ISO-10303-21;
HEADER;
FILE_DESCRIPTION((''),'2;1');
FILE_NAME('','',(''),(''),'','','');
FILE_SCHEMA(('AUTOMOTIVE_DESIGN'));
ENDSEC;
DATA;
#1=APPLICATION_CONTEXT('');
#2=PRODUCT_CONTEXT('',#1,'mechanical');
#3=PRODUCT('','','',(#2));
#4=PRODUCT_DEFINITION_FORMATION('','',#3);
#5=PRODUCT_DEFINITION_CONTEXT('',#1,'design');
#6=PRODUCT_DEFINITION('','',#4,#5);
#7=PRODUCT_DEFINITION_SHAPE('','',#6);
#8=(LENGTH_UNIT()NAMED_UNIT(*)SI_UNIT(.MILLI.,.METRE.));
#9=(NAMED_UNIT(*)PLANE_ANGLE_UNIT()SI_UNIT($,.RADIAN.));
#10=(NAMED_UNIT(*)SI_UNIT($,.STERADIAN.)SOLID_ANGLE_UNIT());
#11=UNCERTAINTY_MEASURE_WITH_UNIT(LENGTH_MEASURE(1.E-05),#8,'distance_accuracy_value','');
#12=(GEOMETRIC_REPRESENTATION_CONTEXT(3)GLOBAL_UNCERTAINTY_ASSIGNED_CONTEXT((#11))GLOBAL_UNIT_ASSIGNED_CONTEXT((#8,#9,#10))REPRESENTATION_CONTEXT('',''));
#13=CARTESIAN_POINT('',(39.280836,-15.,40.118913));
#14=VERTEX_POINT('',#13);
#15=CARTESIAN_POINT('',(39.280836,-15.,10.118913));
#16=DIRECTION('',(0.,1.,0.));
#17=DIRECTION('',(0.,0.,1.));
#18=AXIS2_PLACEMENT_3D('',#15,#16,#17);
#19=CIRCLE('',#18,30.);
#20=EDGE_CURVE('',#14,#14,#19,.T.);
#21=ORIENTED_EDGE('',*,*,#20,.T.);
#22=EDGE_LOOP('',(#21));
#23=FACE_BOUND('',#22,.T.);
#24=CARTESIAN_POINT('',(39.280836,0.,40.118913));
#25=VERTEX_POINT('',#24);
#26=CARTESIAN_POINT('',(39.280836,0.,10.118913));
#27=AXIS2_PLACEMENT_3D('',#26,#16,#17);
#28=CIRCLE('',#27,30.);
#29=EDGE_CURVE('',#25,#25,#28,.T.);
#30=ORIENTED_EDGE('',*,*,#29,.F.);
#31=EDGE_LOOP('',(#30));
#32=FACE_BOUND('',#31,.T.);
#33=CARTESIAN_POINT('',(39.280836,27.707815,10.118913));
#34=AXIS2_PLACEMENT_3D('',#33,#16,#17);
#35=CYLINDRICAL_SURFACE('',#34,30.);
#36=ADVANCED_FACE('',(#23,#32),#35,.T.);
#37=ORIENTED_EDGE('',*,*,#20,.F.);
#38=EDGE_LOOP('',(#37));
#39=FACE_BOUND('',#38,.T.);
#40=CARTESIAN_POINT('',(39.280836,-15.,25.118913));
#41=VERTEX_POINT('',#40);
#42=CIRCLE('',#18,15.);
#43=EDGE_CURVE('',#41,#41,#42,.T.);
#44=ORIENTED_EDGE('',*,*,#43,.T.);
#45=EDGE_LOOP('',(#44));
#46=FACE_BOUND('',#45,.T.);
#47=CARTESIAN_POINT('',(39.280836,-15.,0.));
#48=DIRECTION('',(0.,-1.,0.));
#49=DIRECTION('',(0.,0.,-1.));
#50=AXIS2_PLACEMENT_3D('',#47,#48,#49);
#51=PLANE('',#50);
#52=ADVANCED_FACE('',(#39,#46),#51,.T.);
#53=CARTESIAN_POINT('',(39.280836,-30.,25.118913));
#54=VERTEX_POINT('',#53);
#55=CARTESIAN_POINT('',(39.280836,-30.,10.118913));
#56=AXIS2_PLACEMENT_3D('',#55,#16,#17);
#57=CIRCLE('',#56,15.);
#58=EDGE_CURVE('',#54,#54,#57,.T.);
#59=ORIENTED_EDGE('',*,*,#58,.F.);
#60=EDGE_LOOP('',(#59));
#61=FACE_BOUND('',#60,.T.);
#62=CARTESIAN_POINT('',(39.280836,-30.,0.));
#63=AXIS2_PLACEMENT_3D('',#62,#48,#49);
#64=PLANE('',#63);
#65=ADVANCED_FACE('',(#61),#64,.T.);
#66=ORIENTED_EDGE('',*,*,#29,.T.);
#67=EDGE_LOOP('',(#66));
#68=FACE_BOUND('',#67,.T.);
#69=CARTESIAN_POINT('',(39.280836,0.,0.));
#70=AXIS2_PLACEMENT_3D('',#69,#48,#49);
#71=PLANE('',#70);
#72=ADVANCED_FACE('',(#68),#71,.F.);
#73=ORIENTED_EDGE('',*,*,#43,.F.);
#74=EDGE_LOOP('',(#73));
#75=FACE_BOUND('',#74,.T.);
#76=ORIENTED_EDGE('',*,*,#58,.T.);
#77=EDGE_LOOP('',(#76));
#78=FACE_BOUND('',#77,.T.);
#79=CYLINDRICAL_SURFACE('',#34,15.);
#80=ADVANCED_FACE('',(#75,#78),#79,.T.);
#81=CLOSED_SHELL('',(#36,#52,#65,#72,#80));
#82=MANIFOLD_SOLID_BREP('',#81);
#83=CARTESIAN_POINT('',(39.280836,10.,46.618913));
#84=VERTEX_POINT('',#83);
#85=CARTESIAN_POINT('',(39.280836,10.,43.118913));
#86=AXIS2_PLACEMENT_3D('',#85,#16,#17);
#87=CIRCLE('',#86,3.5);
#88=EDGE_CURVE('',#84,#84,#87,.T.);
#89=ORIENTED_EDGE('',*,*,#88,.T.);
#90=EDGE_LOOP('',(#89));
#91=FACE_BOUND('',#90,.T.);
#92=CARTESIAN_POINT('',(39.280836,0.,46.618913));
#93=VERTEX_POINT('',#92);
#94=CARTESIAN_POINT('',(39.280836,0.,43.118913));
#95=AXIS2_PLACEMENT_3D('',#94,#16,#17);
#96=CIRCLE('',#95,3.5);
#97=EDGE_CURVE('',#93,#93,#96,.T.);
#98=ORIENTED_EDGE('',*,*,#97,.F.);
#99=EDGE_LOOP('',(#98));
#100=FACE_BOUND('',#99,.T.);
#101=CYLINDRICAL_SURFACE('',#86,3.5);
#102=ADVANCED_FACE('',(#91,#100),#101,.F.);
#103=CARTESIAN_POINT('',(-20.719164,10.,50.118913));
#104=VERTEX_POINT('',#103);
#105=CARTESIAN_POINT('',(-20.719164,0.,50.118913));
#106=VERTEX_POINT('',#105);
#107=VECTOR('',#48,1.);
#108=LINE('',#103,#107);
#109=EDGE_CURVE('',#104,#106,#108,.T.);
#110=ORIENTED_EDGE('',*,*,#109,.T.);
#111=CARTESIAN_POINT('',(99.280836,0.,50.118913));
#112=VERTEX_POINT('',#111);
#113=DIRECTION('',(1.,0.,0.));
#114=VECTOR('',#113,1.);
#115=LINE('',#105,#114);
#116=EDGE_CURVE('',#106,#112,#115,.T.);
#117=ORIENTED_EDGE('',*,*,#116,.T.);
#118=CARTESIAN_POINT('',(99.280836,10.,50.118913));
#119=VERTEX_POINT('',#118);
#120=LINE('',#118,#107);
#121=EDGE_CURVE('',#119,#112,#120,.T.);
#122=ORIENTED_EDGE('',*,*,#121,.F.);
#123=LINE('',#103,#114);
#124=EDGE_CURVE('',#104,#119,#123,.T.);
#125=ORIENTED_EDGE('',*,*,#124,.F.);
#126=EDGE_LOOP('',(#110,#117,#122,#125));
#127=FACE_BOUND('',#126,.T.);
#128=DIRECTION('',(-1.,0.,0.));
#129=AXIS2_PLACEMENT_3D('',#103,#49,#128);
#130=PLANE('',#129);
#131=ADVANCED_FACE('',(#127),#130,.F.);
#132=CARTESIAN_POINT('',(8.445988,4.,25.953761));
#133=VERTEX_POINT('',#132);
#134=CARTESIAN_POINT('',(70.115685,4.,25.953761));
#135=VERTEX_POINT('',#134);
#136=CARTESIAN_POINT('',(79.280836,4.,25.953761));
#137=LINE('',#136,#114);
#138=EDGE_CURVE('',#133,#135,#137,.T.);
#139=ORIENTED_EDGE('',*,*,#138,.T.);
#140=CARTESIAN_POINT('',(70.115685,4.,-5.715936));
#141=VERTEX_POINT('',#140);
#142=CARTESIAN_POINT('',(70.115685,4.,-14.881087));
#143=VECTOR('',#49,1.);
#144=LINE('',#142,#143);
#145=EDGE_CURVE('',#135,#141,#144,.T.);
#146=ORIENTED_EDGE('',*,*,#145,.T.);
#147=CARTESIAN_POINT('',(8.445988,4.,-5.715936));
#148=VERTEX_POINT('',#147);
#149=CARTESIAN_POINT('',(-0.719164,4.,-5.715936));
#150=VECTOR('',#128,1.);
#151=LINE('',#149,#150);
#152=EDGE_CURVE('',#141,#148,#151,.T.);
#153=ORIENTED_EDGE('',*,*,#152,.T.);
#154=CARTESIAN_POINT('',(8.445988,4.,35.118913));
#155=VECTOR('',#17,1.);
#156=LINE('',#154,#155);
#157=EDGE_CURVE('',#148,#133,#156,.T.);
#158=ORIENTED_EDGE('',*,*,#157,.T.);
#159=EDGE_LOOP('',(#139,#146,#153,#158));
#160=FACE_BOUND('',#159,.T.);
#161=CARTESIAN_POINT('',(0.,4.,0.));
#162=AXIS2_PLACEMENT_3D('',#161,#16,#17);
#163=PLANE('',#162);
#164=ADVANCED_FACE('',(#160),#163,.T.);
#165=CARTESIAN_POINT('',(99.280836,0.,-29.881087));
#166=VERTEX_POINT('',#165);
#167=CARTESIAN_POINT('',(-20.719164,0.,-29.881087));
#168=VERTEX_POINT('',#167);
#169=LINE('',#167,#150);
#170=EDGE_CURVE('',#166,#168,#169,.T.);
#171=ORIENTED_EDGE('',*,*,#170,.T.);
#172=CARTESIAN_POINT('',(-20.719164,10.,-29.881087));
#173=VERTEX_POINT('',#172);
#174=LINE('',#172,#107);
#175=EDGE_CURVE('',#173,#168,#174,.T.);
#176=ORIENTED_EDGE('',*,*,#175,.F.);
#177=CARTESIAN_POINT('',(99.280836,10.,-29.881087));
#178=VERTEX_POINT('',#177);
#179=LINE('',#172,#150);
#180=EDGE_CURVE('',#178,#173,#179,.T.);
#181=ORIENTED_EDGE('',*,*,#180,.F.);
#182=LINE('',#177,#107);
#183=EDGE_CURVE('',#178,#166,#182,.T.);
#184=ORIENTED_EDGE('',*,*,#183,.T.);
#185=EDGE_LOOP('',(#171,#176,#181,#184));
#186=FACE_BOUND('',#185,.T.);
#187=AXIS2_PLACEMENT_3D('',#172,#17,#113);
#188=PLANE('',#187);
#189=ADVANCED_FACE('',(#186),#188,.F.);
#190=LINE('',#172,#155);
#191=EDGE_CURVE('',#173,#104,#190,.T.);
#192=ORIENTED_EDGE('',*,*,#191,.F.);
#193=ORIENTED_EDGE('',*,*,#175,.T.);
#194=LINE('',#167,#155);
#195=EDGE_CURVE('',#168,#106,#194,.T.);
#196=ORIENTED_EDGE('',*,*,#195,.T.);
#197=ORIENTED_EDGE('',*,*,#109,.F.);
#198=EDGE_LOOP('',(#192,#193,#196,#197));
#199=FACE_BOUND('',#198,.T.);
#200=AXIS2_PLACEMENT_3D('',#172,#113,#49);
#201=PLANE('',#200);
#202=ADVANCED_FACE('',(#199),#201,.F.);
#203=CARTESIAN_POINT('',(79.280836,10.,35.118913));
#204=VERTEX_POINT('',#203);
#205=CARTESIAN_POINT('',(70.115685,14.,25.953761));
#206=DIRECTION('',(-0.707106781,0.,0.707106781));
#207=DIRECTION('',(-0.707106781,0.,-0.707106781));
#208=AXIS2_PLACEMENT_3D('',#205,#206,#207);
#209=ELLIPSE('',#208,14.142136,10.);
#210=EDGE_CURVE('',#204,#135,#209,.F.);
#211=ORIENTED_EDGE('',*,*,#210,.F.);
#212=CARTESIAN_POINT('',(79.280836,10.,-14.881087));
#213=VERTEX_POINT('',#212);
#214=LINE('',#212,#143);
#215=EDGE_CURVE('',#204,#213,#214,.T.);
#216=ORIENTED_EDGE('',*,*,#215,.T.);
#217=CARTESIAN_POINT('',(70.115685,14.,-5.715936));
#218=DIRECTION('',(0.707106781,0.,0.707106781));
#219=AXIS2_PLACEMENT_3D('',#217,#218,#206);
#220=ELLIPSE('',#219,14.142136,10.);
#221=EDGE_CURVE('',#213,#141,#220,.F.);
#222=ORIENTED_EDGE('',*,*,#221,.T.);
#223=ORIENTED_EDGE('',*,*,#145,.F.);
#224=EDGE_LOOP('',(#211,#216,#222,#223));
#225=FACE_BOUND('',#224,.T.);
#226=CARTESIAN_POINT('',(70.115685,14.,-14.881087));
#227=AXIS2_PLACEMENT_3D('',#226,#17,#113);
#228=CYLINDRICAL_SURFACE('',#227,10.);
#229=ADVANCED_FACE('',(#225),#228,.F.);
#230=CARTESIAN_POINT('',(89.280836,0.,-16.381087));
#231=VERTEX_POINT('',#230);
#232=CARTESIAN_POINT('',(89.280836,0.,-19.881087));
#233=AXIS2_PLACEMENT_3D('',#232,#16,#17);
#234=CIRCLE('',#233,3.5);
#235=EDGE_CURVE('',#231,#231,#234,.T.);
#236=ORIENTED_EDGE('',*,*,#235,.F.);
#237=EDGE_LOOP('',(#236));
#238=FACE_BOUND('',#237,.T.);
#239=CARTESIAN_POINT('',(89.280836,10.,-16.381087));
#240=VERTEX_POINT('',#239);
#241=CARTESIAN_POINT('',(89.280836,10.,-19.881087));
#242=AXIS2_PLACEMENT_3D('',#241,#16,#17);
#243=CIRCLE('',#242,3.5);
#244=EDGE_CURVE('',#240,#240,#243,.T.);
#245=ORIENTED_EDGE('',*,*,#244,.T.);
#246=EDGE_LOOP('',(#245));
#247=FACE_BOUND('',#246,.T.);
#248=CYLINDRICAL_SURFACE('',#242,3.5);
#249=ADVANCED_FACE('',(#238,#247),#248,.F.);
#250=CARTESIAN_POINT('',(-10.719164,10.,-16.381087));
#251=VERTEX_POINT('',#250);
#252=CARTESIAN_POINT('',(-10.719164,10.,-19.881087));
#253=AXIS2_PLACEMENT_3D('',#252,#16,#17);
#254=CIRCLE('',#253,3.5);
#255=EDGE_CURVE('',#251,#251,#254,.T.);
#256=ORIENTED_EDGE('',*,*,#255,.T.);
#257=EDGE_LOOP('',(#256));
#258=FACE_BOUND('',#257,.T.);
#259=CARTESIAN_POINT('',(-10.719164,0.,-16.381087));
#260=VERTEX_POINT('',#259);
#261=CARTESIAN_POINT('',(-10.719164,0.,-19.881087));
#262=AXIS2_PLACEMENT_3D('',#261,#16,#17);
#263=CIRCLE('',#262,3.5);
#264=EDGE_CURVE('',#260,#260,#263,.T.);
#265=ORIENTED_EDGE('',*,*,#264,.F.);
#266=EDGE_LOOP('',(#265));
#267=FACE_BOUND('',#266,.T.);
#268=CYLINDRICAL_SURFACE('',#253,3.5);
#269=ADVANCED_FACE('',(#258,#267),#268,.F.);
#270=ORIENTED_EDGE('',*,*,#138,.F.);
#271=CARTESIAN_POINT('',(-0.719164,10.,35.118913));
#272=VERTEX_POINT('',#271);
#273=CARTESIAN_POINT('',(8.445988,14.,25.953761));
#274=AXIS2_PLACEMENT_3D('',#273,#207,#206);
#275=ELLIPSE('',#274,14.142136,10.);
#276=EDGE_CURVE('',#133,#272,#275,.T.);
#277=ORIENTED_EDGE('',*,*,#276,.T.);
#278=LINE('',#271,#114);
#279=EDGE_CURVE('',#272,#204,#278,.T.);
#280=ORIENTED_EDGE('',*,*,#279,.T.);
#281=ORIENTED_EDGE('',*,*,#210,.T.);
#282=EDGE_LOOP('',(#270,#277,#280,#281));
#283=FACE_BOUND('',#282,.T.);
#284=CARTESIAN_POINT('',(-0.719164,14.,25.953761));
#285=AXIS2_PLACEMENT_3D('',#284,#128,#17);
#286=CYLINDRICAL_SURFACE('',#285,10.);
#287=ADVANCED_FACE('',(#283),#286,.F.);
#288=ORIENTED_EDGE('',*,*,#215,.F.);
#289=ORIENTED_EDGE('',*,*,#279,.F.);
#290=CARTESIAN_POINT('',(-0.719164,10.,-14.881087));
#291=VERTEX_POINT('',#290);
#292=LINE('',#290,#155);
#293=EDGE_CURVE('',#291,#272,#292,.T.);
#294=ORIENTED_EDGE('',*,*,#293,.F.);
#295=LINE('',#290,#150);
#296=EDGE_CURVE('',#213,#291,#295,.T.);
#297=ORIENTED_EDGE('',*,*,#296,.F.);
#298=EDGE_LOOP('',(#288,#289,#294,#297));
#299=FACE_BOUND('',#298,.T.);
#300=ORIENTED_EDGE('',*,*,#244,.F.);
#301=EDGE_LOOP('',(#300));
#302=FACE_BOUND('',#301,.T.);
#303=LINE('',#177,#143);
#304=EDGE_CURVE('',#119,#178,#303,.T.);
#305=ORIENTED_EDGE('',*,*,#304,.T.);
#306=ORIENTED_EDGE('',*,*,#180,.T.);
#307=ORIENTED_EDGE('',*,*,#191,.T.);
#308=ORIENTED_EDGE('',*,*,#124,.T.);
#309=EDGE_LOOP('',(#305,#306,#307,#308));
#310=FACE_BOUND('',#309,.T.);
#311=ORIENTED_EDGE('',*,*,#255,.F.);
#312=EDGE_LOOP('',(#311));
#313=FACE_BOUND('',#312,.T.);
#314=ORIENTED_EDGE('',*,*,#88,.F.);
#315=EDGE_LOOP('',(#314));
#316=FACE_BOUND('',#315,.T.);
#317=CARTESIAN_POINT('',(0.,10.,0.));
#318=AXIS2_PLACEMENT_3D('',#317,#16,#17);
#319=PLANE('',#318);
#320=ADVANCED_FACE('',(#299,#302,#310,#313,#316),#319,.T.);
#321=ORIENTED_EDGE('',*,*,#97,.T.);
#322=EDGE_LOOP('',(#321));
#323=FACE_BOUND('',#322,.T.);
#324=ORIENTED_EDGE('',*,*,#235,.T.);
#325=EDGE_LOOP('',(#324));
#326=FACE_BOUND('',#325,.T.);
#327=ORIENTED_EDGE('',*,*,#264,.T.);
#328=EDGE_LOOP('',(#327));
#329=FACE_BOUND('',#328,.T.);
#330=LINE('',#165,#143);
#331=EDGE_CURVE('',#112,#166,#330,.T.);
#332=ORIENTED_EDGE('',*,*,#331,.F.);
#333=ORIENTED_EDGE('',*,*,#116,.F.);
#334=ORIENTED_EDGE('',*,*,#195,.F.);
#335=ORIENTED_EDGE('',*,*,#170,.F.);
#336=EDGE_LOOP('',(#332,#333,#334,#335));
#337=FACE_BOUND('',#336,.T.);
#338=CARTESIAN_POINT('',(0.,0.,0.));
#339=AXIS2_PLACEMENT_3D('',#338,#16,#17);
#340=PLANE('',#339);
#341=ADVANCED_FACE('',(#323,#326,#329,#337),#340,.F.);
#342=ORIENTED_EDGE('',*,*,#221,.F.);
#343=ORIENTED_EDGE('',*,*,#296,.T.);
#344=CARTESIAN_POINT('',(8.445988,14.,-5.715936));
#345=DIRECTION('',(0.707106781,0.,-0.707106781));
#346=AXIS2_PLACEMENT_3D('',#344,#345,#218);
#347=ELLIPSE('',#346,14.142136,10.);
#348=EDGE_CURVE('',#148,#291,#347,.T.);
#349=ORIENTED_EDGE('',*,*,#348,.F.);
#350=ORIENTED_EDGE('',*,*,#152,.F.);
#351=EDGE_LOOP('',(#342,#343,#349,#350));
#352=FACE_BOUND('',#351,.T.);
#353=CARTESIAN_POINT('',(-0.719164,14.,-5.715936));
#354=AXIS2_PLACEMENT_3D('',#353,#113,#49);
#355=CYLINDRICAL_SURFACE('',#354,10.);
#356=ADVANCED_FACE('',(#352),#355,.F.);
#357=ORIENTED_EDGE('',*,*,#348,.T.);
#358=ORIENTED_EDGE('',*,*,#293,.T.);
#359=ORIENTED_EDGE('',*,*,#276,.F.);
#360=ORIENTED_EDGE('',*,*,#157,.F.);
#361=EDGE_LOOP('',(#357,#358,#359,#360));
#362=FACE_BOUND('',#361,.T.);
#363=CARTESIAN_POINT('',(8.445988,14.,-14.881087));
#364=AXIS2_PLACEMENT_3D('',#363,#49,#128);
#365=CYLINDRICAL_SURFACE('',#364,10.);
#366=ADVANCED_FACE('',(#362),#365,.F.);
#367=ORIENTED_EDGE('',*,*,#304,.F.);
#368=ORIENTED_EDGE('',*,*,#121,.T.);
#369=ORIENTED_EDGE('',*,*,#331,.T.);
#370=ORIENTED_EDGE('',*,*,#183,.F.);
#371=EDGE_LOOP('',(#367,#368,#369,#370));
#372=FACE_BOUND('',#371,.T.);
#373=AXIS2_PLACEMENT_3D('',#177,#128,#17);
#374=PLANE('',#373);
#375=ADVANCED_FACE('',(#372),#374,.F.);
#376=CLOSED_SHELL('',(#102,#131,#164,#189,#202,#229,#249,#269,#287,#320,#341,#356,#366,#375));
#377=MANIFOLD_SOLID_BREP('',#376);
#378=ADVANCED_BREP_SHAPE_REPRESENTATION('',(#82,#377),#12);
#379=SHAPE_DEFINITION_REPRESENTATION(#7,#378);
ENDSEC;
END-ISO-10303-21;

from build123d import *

# Parameters (mm, degrees)
SKETCH1_W             = 120
SKETCH1_H             = 80
BOSS_EXTRUDE1_DEPTH   = 10
SKETCH2_W             = 80
SKETCH2_H             = 50
CUT_EXTRUDE1_DEPTH    = 6
FILLET1_R             = 10
M8X1_0_TAPPED_HOLE2_D = 7
REVOLVE2_START        = -15
REVOLVE2_OUTLINE_R    = 30
REVOLVE2_DEPTH        = 15
REVOLVE2_START_2      = -30
REVOLVE2_2_OUTLINE_R  = 15
REVOLVE2_2_DEPTH      = 15


# Read off the part's stored shape, not the designer's step: Revolve2
with BuildPart() as part:
    # Sketch1 → Boss-Extrude1 (new body)
    with BuildSketch(Plane(origin=(0, 0, 0), x_dir=(1, 0, 0), z_dir=(0, 1, 0))):
        with Locations((39.28083641, -10.118912605)):
            Rectangle(SKETCH1_W, SKETCH1_H)
    extrude(amount=BOSS_EXTRUDE1_DEPTH)

    # Sketch2 → Cut-Extrude1 (cut)
    with BuildSketch(Plane(origin=(0, 10, 0), x_dir=(1, 0, 0), z_dir=(0, 1, 0))):
        with Locations((39.28083641, -10.118912605)):
            Rectangle(SKETCH2_W, SKETCH2_H)
    extrude(amount=-CUT_EXTRUDE1_DEPTH, mode=Mode.SUBTRACT)

    # Fillet1
    # the kernel refuses this fillet: 10 mm, written as the material it adds along each edge
    with BuildSketch(Plane(origin=(79.28083641, 4, 35.118912605), x_dir=(0, 1, 0), z_dir=(-1, 0, 0)), Plane(origin=(-0.71916359, 4, -14.881087395), x_dir=(0, 1, 0), z_dir=(1, 0, 0))) as fillet1_piece_1:
        with BuildLine():
            CenterArc((10, 9.16515139), FILLET1_R, 180, 66.421821522)
            Line((0, 9.16515139), (0, 0))
            Line((0, 0), (6, 0))
        make_face()
    extrude(amount=80)
    with BuildSketch(Plane(origin=(79.28083641, 4, -14.881087395), x_dir=(0, 1, 0), z_dir=(0, 0, 1)), Plane(origin=(-0.71916359, 4, 35.118912605), x_dir=(0, 1, 0), z_dir=(0, 0, -1))) as fillet1_piece_2:
        with BuildLine():
            CenterArc((10, 9.16515139), FILLET1_R, 180, 66.421821522)
            Line((0, 9.16515139), (0, 0))
            Line((0, 0), (6, 0))
        make_face()
    extrude(amount=50)

    # M8x1.0 Tapped Hole2 (through all)
    with Locations(Plane(origin=(-10.71916359, 10, -19.881087395), x_dir=(0, 0, 1), z_dir=(0, 1, 0))):
        with Locations((0, 0), (0, 100), (63, 50)):
            Hole(M8X1_0_TAPPED_HOLE2_D / 2)


with BuildPart() as body_2:
    # Revolve2 outline → Revolve2 (new body)
    with BuildSketch(Plane(origin=(0, 0, 0), x_dir=(1, 0, 0), z_dir=(0, 1, 0)).offset(REVOLVE2_START)):
        with Locations((39.28083641, -10.118912605)):
            Circle(REVOLVE2_OUTLINE_R)
    extrude(amount=REVOLVE2_DEPTH)

    # Revolve2 2 outline → Revolve2 2 (add)
    with BuildSketch(Plane(origin=(0, 0, 0), x_dir=(1, 0, 0), z_dir=(0, 1, 0)).offset(REVOLVE2_START_2)):
        with Locations((39.28083641, -10.118912605)):
            Circle(REVOLVE2_2_OUTLINE_R)
    extrude(amount=REVOLVE2_2_DEPTH)


solid = Compound([part.part, body_2.part])
